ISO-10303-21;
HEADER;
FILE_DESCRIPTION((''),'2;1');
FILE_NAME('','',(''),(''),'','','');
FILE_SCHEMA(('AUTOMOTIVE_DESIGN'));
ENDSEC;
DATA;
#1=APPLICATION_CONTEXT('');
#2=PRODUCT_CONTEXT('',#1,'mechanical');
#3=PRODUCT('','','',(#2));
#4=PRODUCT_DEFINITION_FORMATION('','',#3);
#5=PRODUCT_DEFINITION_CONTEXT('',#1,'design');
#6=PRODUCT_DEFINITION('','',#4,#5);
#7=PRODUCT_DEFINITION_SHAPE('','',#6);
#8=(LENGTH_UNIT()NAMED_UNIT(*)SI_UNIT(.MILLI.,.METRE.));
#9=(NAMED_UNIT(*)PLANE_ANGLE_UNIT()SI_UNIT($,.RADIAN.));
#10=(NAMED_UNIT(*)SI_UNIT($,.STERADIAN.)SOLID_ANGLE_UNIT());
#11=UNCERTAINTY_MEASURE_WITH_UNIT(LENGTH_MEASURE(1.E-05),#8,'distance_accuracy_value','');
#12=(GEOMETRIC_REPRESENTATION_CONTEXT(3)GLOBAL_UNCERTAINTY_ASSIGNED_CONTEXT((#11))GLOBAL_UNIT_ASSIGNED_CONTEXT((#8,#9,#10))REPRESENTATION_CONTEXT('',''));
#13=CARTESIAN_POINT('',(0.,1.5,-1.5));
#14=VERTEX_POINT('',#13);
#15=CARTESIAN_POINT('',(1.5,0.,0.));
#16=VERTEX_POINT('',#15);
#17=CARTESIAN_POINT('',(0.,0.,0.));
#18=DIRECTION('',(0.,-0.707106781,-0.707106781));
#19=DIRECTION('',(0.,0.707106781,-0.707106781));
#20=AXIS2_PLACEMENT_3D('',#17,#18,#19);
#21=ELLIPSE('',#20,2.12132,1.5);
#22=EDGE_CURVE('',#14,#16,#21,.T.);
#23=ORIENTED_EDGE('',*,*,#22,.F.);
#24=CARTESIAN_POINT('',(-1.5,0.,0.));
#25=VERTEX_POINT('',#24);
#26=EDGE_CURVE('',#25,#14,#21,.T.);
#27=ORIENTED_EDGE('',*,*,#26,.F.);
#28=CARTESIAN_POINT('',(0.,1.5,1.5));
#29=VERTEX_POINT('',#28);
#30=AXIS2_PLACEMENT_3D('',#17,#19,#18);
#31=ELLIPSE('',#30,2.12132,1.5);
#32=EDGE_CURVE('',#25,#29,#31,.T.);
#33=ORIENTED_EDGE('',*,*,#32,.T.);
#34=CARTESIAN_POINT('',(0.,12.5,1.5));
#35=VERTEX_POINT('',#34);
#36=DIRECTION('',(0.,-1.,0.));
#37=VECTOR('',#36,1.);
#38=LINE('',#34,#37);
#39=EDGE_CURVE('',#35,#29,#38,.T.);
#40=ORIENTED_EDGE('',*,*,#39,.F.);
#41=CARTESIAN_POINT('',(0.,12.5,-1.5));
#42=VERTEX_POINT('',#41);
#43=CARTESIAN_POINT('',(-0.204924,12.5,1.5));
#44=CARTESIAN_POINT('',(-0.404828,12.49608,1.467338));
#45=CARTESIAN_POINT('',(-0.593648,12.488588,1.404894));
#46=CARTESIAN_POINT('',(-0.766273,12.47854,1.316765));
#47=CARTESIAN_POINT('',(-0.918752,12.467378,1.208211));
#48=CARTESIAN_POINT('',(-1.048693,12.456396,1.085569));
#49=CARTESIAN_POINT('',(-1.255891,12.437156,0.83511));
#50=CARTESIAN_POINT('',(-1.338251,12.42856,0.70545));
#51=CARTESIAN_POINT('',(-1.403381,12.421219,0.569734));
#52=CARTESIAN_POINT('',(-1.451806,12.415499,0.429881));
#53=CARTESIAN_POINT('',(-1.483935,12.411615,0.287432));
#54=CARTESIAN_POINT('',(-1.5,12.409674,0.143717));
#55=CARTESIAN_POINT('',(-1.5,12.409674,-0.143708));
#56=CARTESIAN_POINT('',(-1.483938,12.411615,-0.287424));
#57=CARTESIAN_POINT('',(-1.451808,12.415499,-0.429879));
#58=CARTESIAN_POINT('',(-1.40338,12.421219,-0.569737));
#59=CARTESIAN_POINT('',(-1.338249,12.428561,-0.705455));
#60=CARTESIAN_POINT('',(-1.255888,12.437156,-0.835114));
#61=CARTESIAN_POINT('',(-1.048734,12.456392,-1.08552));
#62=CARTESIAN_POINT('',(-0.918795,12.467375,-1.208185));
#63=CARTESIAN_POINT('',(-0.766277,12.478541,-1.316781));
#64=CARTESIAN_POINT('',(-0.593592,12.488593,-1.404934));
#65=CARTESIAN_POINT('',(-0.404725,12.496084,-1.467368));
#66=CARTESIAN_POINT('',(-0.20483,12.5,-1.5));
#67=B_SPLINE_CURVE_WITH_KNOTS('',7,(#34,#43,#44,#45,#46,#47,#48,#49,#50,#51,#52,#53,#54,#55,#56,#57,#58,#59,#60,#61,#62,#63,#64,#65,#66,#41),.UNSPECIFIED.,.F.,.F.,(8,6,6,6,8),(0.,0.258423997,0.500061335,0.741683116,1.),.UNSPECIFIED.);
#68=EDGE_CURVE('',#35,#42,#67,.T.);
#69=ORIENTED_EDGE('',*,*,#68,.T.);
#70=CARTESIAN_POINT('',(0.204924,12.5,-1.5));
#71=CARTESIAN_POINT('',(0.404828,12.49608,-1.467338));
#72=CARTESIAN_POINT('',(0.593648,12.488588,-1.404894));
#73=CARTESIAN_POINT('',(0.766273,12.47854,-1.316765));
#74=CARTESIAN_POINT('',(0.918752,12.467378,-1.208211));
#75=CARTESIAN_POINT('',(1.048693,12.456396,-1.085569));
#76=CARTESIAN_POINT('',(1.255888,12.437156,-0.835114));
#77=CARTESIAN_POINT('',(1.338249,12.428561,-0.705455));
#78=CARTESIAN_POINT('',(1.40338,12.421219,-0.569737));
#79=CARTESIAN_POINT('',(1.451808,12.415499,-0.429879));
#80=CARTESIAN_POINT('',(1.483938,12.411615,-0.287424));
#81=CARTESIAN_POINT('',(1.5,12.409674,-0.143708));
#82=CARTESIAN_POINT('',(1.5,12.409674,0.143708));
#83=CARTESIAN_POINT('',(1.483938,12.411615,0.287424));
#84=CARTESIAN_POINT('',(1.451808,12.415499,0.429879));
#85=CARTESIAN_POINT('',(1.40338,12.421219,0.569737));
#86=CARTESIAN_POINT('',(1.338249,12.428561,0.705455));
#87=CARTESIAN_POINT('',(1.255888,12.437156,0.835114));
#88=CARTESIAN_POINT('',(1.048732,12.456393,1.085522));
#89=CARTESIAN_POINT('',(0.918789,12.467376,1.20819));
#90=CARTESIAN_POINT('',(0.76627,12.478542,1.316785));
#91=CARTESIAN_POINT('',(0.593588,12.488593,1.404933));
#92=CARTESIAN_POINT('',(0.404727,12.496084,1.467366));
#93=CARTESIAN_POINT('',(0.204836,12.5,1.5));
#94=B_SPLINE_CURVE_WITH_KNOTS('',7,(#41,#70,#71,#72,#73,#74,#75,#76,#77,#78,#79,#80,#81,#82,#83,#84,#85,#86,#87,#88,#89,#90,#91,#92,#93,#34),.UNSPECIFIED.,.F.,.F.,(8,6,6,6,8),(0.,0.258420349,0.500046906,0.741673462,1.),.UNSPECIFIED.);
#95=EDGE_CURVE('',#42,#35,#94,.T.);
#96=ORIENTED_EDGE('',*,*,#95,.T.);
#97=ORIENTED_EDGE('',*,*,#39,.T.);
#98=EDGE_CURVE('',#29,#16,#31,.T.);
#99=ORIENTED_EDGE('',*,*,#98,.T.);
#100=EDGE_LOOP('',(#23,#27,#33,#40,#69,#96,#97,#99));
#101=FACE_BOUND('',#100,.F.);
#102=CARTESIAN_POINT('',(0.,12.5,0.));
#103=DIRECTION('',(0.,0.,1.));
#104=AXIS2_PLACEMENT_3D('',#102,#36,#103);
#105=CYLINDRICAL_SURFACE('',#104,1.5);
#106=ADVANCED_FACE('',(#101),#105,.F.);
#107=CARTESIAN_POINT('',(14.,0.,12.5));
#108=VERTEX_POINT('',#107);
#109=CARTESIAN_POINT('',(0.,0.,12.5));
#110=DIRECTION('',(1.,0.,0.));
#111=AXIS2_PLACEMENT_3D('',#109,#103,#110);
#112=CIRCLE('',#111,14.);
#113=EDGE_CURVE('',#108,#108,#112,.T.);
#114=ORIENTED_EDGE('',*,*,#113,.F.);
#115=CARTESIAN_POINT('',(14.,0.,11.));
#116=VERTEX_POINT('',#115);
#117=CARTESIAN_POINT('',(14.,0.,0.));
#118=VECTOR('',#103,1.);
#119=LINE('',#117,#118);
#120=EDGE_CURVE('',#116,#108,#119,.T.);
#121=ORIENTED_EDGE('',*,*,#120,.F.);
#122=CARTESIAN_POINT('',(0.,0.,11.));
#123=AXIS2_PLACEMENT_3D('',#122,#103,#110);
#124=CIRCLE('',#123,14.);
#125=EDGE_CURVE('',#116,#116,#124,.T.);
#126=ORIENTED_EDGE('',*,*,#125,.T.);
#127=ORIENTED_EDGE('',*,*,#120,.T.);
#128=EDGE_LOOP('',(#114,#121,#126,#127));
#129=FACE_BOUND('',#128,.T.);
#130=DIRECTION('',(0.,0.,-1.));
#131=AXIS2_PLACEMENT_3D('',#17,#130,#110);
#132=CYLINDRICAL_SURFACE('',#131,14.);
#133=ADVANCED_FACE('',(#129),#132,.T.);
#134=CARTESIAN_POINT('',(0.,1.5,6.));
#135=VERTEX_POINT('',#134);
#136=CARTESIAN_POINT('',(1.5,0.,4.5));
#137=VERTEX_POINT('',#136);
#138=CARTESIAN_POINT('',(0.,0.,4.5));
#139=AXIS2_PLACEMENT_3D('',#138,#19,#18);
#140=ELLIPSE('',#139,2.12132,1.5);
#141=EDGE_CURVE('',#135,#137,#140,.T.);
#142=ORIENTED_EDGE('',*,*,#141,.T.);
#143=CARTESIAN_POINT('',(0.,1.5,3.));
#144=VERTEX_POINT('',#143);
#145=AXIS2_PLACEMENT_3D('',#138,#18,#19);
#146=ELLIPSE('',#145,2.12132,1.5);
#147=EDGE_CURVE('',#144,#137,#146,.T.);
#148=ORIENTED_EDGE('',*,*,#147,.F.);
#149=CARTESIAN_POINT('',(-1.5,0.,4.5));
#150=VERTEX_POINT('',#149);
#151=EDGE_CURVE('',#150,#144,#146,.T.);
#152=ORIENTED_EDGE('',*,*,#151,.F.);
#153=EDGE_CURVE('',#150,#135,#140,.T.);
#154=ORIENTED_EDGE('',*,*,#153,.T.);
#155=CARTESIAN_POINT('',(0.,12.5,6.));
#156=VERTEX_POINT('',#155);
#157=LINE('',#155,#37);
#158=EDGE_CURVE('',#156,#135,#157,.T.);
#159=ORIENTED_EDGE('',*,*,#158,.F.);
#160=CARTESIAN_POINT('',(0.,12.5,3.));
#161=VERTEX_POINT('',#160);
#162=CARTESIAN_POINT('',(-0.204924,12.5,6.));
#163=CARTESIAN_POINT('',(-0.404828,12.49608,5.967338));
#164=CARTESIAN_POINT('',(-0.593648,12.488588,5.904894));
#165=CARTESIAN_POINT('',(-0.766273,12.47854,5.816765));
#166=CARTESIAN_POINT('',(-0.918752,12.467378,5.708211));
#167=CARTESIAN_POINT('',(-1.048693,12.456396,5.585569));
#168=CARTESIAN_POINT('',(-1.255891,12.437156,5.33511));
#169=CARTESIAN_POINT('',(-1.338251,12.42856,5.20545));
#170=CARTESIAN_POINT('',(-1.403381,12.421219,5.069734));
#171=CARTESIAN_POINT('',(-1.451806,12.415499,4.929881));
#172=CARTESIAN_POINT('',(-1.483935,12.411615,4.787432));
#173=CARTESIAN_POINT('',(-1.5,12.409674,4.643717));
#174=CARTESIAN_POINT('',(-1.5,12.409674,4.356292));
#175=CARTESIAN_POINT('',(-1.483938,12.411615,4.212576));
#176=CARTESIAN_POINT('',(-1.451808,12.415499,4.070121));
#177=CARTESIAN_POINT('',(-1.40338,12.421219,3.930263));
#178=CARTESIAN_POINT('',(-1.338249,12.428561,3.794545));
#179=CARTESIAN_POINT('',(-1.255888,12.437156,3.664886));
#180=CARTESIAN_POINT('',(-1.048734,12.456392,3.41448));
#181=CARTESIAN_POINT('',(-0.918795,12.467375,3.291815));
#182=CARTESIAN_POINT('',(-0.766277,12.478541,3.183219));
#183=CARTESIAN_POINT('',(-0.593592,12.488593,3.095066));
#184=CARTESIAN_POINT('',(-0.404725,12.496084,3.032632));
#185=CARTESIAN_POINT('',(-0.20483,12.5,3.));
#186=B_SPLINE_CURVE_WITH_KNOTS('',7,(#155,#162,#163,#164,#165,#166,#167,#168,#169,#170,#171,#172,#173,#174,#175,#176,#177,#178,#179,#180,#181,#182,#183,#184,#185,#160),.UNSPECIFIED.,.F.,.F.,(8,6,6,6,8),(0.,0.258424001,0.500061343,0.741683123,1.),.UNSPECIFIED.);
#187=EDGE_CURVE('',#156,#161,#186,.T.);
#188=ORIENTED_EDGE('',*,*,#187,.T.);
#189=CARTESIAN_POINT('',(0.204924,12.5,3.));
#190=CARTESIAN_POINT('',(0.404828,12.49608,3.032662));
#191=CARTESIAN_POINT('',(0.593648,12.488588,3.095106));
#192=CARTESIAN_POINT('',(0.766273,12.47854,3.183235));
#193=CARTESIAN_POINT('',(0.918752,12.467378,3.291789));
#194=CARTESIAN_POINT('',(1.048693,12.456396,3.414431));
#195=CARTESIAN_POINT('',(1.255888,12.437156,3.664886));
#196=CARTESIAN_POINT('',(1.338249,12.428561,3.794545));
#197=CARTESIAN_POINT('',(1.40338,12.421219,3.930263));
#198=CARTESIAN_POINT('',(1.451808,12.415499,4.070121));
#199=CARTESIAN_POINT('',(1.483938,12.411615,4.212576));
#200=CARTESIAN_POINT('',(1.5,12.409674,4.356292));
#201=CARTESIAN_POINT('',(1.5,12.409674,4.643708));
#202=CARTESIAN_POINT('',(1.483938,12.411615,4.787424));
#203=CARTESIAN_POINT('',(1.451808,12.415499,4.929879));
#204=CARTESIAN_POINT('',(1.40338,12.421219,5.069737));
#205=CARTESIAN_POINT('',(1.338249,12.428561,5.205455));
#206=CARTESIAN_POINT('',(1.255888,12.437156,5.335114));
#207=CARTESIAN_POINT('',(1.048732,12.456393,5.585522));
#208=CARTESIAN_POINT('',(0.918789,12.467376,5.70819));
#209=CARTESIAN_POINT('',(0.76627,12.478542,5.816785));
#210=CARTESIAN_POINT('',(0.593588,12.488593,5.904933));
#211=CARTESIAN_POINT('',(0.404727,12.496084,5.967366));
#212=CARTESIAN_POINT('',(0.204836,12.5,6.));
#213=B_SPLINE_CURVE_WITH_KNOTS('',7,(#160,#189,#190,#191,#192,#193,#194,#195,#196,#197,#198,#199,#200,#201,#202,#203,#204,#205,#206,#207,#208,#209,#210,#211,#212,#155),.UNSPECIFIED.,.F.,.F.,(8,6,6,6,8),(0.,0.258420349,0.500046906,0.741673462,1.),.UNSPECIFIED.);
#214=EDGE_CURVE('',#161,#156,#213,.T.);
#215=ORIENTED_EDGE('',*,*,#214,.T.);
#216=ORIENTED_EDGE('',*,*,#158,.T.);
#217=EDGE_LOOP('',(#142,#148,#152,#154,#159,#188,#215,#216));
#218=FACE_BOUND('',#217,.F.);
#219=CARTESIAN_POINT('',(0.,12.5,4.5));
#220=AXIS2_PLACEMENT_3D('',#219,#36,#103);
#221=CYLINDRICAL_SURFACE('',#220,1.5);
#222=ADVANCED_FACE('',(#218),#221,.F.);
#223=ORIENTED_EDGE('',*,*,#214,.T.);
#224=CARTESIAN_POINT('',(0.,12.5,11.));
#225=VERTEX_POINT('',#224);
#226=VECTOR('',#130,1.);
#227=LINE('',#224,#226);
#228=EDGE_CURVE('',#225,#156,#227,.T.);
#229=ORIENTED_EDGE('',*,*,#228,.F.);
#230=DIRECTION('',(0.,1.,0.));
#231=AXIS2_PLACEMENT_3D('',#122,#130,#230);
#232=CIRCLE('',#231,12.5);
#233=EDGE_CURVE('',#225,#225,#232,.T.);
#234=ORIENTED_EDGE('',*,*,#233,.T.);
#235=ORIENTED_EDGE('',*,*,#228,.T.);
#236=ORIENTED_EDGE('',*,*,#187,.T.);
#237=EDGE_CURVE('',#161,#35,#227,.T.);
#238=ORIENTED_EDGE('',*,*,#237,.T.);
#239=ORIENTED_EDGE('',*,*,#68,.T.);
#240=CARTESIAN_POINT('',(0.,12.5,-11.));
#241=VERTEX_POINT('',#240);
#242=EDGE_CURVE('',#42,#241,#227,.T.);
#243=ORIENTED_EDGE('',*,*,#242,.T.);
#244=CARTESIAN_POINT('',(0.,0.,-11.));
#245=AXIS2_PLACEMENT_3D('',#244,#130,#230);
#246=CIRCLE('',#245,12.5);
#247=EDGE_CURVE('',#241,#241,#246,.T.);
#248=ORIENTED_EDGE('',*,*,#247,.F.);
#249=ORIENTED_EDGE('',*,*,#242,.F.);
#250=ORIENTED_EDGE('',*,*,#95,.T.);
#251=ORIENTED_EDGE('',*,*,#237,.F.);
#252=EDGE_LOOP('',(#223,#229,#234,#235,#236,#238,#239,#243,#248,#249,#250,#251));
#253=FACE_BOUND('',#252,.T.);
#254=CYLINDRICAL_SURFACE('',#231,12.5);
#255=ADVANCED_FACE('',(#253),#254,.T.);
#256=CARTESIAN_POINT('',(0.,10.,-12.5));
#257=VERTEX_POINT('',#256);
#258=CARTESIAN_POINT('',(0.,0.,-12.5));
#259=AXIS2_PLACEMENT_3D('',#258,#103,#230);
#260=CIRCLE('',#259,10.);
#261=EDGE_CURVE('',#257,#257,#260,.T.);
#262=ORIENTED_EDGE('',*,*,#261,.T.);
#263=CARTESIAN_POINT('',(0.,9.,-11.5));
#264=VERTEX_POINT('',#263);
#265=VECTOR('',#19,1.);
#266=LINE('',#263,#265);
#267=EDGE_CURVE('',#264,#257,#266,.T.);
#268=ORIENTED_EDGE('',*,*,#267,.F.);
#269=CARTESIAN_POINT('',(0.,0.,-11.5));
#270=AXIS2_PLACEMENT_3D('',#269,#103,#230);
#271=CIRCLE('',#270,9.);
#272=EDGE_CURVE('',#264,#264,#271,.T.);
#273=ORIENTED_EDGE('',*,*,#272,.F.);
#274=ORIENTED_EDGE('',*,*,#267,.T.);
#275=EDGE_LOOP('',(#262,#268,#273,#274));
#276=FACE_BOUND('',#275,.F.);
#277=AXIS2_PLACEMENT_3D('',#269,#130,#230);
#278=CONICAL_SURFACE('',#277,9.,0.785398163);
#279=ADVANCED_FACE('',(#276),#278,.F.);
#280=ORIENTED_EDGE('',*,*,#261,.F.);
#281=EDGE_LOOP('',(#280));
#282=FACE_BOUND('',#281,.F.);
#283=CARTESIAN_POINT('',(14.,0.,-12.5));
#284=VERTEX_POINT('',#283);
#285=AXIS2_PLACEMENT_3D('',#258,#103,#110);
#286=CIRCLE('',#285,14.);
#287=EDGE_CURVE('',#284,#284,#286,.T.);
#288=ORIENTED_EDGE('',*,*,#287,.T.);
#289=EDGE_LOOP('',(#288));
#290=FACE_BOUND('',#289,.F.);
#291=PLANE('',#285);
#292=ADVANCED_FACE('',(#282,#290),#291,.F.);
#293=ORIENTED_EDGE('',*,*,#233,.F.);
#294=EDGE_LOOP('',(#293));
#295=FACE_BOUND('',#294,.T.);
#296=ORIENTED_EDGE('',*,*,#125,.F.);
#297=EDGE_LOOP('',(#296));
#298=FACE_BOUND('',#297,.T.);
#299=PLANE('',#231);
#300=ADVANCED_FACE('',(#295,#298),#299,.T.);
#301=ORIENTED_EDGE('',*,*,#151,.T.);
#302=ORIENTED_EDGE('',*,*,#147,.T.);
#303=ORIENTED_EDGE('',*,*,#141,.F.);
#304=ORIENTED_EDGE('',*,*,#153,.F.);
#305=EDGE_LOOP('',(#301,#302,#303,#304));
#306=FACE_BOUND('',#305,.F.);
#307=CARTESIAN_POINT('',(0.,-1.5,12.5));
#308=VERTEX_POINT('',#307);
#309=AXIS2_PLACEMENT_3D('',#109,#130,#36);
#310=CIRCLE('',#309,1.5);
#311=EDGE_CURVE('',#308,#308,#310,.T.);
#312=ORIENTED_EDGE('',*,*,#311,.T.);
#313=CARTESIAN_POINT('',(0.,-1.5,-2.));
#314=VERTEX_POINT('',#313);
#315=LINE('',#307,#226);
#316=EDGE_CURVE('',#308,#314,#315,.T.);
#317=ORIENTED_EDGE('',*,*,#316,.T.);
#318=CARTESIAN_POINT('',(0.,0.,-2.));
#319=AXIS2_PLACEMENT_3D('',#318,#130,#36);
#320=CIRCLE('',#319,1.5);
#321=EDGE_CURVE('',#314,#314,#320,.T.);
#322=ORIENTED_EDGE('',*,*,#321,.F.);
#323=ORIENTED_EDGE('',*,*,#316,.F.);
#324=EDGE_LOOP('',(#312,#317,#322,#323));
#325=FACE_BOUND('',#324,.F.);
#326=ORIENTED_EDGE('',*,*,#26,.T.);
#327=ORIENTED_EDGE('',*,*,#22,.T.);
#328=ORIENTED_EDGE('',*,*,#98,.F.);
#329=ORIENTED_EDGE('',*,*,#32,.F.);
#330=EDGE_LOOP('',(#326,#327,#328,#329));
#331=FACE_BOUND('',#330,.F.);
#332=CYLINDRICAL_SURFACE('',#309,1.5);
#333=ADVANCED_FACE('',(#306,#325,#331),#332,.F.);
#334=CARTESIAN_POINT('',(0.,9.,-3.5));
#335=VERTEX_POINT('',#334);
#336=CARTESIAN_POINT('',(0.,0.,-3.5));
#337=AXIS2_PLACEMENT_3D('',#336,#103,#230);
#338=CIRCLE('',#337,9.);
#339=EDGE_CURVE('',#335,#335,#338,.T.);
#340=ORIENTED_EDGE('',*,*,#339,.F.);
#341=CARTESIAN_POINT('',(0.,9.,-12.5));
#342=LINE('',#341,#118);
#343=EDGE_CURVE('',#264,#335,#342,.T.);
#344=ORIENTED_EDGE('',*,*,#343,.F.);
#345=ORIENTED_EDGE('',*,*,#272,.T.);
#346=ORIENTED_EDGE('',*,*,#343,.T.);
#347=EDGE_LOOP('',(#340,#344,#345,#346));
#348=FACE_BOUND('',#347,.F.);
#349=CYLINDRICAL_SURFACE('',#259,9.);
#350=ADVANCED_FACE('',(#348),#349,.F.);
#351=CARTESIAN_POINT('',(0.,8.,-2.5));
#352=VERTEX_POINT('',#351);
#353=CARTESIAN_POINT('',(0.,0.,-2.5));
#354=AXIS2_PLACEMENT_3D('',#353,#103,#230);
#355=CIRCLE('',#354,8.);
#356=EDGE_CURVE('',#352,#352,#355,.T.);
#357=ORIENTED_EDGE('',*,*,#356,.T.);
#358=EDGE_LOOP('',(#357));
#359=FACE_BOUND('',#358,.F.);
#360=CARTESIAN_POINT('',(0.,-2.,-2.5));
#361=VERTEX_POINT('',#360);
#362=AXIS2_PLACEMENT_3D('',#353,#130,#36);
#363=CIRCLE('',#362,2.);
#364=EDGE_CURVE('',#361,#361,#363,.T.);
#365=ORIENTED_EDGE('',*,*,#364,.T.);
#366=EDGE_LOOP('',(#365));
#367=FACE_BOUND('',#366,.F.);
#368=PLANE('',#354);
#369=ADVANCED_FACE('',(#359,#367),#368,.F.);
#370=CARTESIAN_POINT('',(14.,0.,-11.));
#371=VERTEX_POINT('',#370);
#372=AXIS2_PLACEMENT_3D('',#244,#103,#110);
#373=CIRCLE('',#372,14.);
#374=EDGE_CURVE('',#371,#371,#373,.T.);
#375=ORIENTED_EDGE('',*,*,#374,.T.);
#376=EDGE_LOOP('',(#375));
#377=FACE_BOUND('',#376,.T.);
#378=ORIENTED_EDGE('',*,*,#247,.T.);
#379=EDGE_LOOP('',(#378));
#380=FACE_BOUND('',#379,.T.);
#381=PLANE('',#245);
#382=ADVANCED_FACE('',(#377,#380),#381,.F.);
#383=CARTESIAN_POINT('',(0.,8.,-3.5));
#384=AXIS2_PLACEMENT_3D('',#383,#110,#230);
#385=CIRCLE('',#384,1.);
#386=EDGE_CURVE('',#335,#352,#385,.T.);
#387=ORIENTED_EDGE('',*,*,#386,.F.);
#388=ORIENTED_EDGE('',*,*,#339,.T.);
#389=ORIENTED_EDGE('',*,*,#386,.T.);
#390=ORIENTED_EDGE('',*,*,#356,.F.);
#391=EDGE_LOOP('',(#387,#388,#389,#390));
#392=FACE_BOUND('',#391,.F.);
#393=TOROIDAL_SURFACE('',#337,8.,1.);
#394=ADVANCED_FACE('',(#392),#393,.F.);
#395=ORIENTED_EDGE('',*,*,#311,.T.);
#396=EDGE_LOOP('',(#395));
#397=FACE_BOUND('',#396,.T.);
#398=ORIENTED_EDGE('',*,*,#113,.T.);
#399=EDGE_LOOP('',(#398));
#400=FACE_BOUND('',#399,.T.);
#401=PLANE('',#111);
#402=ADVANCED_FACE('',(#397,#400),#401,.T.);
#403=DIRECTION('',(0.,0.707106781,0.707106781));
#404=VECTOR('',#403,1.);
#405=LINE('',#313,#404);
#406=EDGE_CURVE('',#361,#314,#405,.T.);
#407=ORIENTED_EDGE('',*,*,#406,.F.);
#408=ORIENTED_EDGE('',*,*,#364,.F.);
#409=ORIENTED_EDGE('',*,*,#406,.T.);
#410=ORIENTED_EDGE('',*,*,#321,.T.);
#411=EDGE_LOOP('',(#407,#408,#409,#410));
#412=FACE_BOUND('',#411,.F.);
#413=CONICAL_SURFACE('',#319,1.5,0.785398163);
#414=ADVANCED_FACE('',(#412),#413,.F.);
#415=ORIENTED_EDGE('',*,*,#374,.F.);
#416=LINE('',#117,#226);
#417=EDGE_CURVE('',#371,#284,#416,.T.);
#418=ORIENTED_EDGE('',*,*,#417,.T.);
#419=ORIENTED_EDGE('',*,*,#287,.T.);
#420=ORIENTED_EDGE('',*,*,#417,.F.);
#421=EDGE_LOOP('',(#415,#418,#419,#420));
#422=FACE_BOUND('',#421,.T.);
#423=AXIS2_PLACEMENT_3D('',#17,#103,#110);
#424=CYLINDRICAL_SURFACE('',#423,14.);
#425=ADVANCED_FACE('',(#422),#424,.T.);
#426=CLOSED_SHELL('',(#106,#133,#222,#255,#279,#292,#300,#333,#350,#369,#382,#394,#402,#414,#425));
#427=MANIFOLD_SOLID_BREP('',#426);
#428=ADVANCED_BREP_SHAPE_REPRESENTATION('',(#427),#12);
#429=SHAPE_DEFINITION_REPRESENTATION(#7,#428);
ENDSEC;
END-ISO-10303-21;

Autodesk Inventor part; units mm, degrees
ref_plane "YZ Plane" through (0, 0, 0) normal (1, 0, 0) x (0, 1, 0)
ref_plane "XZ Plane" through (0, 0, 0) normal (0, 1, 0) x (-1, 0, 0)
sketch "Náčrt1" plane through (0, 0, 0) normal (0, 0, 1) x (1, 0, 0)
  circle A0 centre (0, 0) radius 14
  dimension "d0" = 28
extrude "Vysunutí1" add sketch "Náčrt1" along normal mid plane 25
sketch "Náčrt2" plane through (0, 0, 0) normal (1, 0, 0) x (0, 1, 0)
  line L0 (-14, -12.5) -> (14, -12.5) projected
  line L1 (14, 12.5) -> (-14, 12.5) projected
  line L2 (14, -12.5) -> (14, 12.5) projected
  line L3 (14, 11) -> (12.5, 11)
  line L4 (12.5, 11) -> (12.5, -11)
  line L5 (12.5, -11) -> (14, -11)
  line L6 (14, -11) -> (14, 11)
  line L7 (14, 0) -> (-14, 0) construction
  line L8 (-14, -12.5) -> (-14, 12.5) projected
  line L9 (0, 12.5) -> (0, -12.5) construction
  point P0 (0, 0)
  point P1 (14, -11)
  dimension "d4" = 11
  dimension "d5" = 12.5
revolve "Rotace1" cut sketch "Náčrt2" angle 360 about axis through (0, 0, 12.5) along (0, 0, -1) contours L5 L4 L3 L2
sketch "Náčrt3" plane through (0, 0, -12.5) normal (0, 0, -1) x (-1, 0, 0)
  line L0 (-6, 5) -> (6, 5)
  line L1 (6, 5) -> (6, -5)
  line L2 (6, -5) -> (-6, -5)
  line L3 (-6, -5) -> (-6, 5)
  line L4 (-6, 5) -> (6, -5) construction
  line L5 (6, 5) -> (-6, -5) construction
  circle A0 centre (0, 0) radius 9
  dimension "d7" = 12
  dimension "d8" = 10
  dimension "d9" = 18
hole "Díra1" at (0, 0, -12.5) direction (0, 0, 1) diameter 18 depth 10
sketch "Náčrt4" plane through (0, 0, 12.5) normal (0, 0, 1) x (1, 0, 0)
  circle A0 centre (0, 0) radius 14 projected
hole "Díra2" at (0, 0, 12.5) direction (0, 0, -1) diameter 3 end through all
ref_plane "Pracovní rovina1" through (0, 12.5, 0) normal (0, -1, 0) x (1, 0, 0)
sketch "Náčrt5" plane through (0, 12.5, 0) normal (0, -1, 0) x (1, 0, 0)
  line L0 (1.5, -2.5) -> (-1.5, -2.5) projected
  line L1 (-9, -2.5) -> (9, -2.5) projected
  line L2 (0, 0) -> (0, -10.7479) construction
  point P0 (0, 4.5)
  dimension "d24" = 2.5
  dimension "d25" = 4.5
hole "Díra3" at (0, 12.5, 0) at (0, 12.5, 4.5) direction (0, -1, 0) diameter 3 depth 12.5
thread "Závit1" size "M3x0.5" class "6H" standard "ISO Metric profile" full length
thread "Závit2" size "M3x0.5" class "6H" standard "ISO Metric profile" full length
chamfer "Zkosení1" distance 1 angle 45 1 edges at (0, -9, -12.5)
fillet "Zaoblení1" radius 1 1 edges at (0, -9, -2.5)
chamfer "Zkosení2" distance 0.5 angle 45 1 edges at (0, 1.5, -2.5)
properties part number "Wheel"
